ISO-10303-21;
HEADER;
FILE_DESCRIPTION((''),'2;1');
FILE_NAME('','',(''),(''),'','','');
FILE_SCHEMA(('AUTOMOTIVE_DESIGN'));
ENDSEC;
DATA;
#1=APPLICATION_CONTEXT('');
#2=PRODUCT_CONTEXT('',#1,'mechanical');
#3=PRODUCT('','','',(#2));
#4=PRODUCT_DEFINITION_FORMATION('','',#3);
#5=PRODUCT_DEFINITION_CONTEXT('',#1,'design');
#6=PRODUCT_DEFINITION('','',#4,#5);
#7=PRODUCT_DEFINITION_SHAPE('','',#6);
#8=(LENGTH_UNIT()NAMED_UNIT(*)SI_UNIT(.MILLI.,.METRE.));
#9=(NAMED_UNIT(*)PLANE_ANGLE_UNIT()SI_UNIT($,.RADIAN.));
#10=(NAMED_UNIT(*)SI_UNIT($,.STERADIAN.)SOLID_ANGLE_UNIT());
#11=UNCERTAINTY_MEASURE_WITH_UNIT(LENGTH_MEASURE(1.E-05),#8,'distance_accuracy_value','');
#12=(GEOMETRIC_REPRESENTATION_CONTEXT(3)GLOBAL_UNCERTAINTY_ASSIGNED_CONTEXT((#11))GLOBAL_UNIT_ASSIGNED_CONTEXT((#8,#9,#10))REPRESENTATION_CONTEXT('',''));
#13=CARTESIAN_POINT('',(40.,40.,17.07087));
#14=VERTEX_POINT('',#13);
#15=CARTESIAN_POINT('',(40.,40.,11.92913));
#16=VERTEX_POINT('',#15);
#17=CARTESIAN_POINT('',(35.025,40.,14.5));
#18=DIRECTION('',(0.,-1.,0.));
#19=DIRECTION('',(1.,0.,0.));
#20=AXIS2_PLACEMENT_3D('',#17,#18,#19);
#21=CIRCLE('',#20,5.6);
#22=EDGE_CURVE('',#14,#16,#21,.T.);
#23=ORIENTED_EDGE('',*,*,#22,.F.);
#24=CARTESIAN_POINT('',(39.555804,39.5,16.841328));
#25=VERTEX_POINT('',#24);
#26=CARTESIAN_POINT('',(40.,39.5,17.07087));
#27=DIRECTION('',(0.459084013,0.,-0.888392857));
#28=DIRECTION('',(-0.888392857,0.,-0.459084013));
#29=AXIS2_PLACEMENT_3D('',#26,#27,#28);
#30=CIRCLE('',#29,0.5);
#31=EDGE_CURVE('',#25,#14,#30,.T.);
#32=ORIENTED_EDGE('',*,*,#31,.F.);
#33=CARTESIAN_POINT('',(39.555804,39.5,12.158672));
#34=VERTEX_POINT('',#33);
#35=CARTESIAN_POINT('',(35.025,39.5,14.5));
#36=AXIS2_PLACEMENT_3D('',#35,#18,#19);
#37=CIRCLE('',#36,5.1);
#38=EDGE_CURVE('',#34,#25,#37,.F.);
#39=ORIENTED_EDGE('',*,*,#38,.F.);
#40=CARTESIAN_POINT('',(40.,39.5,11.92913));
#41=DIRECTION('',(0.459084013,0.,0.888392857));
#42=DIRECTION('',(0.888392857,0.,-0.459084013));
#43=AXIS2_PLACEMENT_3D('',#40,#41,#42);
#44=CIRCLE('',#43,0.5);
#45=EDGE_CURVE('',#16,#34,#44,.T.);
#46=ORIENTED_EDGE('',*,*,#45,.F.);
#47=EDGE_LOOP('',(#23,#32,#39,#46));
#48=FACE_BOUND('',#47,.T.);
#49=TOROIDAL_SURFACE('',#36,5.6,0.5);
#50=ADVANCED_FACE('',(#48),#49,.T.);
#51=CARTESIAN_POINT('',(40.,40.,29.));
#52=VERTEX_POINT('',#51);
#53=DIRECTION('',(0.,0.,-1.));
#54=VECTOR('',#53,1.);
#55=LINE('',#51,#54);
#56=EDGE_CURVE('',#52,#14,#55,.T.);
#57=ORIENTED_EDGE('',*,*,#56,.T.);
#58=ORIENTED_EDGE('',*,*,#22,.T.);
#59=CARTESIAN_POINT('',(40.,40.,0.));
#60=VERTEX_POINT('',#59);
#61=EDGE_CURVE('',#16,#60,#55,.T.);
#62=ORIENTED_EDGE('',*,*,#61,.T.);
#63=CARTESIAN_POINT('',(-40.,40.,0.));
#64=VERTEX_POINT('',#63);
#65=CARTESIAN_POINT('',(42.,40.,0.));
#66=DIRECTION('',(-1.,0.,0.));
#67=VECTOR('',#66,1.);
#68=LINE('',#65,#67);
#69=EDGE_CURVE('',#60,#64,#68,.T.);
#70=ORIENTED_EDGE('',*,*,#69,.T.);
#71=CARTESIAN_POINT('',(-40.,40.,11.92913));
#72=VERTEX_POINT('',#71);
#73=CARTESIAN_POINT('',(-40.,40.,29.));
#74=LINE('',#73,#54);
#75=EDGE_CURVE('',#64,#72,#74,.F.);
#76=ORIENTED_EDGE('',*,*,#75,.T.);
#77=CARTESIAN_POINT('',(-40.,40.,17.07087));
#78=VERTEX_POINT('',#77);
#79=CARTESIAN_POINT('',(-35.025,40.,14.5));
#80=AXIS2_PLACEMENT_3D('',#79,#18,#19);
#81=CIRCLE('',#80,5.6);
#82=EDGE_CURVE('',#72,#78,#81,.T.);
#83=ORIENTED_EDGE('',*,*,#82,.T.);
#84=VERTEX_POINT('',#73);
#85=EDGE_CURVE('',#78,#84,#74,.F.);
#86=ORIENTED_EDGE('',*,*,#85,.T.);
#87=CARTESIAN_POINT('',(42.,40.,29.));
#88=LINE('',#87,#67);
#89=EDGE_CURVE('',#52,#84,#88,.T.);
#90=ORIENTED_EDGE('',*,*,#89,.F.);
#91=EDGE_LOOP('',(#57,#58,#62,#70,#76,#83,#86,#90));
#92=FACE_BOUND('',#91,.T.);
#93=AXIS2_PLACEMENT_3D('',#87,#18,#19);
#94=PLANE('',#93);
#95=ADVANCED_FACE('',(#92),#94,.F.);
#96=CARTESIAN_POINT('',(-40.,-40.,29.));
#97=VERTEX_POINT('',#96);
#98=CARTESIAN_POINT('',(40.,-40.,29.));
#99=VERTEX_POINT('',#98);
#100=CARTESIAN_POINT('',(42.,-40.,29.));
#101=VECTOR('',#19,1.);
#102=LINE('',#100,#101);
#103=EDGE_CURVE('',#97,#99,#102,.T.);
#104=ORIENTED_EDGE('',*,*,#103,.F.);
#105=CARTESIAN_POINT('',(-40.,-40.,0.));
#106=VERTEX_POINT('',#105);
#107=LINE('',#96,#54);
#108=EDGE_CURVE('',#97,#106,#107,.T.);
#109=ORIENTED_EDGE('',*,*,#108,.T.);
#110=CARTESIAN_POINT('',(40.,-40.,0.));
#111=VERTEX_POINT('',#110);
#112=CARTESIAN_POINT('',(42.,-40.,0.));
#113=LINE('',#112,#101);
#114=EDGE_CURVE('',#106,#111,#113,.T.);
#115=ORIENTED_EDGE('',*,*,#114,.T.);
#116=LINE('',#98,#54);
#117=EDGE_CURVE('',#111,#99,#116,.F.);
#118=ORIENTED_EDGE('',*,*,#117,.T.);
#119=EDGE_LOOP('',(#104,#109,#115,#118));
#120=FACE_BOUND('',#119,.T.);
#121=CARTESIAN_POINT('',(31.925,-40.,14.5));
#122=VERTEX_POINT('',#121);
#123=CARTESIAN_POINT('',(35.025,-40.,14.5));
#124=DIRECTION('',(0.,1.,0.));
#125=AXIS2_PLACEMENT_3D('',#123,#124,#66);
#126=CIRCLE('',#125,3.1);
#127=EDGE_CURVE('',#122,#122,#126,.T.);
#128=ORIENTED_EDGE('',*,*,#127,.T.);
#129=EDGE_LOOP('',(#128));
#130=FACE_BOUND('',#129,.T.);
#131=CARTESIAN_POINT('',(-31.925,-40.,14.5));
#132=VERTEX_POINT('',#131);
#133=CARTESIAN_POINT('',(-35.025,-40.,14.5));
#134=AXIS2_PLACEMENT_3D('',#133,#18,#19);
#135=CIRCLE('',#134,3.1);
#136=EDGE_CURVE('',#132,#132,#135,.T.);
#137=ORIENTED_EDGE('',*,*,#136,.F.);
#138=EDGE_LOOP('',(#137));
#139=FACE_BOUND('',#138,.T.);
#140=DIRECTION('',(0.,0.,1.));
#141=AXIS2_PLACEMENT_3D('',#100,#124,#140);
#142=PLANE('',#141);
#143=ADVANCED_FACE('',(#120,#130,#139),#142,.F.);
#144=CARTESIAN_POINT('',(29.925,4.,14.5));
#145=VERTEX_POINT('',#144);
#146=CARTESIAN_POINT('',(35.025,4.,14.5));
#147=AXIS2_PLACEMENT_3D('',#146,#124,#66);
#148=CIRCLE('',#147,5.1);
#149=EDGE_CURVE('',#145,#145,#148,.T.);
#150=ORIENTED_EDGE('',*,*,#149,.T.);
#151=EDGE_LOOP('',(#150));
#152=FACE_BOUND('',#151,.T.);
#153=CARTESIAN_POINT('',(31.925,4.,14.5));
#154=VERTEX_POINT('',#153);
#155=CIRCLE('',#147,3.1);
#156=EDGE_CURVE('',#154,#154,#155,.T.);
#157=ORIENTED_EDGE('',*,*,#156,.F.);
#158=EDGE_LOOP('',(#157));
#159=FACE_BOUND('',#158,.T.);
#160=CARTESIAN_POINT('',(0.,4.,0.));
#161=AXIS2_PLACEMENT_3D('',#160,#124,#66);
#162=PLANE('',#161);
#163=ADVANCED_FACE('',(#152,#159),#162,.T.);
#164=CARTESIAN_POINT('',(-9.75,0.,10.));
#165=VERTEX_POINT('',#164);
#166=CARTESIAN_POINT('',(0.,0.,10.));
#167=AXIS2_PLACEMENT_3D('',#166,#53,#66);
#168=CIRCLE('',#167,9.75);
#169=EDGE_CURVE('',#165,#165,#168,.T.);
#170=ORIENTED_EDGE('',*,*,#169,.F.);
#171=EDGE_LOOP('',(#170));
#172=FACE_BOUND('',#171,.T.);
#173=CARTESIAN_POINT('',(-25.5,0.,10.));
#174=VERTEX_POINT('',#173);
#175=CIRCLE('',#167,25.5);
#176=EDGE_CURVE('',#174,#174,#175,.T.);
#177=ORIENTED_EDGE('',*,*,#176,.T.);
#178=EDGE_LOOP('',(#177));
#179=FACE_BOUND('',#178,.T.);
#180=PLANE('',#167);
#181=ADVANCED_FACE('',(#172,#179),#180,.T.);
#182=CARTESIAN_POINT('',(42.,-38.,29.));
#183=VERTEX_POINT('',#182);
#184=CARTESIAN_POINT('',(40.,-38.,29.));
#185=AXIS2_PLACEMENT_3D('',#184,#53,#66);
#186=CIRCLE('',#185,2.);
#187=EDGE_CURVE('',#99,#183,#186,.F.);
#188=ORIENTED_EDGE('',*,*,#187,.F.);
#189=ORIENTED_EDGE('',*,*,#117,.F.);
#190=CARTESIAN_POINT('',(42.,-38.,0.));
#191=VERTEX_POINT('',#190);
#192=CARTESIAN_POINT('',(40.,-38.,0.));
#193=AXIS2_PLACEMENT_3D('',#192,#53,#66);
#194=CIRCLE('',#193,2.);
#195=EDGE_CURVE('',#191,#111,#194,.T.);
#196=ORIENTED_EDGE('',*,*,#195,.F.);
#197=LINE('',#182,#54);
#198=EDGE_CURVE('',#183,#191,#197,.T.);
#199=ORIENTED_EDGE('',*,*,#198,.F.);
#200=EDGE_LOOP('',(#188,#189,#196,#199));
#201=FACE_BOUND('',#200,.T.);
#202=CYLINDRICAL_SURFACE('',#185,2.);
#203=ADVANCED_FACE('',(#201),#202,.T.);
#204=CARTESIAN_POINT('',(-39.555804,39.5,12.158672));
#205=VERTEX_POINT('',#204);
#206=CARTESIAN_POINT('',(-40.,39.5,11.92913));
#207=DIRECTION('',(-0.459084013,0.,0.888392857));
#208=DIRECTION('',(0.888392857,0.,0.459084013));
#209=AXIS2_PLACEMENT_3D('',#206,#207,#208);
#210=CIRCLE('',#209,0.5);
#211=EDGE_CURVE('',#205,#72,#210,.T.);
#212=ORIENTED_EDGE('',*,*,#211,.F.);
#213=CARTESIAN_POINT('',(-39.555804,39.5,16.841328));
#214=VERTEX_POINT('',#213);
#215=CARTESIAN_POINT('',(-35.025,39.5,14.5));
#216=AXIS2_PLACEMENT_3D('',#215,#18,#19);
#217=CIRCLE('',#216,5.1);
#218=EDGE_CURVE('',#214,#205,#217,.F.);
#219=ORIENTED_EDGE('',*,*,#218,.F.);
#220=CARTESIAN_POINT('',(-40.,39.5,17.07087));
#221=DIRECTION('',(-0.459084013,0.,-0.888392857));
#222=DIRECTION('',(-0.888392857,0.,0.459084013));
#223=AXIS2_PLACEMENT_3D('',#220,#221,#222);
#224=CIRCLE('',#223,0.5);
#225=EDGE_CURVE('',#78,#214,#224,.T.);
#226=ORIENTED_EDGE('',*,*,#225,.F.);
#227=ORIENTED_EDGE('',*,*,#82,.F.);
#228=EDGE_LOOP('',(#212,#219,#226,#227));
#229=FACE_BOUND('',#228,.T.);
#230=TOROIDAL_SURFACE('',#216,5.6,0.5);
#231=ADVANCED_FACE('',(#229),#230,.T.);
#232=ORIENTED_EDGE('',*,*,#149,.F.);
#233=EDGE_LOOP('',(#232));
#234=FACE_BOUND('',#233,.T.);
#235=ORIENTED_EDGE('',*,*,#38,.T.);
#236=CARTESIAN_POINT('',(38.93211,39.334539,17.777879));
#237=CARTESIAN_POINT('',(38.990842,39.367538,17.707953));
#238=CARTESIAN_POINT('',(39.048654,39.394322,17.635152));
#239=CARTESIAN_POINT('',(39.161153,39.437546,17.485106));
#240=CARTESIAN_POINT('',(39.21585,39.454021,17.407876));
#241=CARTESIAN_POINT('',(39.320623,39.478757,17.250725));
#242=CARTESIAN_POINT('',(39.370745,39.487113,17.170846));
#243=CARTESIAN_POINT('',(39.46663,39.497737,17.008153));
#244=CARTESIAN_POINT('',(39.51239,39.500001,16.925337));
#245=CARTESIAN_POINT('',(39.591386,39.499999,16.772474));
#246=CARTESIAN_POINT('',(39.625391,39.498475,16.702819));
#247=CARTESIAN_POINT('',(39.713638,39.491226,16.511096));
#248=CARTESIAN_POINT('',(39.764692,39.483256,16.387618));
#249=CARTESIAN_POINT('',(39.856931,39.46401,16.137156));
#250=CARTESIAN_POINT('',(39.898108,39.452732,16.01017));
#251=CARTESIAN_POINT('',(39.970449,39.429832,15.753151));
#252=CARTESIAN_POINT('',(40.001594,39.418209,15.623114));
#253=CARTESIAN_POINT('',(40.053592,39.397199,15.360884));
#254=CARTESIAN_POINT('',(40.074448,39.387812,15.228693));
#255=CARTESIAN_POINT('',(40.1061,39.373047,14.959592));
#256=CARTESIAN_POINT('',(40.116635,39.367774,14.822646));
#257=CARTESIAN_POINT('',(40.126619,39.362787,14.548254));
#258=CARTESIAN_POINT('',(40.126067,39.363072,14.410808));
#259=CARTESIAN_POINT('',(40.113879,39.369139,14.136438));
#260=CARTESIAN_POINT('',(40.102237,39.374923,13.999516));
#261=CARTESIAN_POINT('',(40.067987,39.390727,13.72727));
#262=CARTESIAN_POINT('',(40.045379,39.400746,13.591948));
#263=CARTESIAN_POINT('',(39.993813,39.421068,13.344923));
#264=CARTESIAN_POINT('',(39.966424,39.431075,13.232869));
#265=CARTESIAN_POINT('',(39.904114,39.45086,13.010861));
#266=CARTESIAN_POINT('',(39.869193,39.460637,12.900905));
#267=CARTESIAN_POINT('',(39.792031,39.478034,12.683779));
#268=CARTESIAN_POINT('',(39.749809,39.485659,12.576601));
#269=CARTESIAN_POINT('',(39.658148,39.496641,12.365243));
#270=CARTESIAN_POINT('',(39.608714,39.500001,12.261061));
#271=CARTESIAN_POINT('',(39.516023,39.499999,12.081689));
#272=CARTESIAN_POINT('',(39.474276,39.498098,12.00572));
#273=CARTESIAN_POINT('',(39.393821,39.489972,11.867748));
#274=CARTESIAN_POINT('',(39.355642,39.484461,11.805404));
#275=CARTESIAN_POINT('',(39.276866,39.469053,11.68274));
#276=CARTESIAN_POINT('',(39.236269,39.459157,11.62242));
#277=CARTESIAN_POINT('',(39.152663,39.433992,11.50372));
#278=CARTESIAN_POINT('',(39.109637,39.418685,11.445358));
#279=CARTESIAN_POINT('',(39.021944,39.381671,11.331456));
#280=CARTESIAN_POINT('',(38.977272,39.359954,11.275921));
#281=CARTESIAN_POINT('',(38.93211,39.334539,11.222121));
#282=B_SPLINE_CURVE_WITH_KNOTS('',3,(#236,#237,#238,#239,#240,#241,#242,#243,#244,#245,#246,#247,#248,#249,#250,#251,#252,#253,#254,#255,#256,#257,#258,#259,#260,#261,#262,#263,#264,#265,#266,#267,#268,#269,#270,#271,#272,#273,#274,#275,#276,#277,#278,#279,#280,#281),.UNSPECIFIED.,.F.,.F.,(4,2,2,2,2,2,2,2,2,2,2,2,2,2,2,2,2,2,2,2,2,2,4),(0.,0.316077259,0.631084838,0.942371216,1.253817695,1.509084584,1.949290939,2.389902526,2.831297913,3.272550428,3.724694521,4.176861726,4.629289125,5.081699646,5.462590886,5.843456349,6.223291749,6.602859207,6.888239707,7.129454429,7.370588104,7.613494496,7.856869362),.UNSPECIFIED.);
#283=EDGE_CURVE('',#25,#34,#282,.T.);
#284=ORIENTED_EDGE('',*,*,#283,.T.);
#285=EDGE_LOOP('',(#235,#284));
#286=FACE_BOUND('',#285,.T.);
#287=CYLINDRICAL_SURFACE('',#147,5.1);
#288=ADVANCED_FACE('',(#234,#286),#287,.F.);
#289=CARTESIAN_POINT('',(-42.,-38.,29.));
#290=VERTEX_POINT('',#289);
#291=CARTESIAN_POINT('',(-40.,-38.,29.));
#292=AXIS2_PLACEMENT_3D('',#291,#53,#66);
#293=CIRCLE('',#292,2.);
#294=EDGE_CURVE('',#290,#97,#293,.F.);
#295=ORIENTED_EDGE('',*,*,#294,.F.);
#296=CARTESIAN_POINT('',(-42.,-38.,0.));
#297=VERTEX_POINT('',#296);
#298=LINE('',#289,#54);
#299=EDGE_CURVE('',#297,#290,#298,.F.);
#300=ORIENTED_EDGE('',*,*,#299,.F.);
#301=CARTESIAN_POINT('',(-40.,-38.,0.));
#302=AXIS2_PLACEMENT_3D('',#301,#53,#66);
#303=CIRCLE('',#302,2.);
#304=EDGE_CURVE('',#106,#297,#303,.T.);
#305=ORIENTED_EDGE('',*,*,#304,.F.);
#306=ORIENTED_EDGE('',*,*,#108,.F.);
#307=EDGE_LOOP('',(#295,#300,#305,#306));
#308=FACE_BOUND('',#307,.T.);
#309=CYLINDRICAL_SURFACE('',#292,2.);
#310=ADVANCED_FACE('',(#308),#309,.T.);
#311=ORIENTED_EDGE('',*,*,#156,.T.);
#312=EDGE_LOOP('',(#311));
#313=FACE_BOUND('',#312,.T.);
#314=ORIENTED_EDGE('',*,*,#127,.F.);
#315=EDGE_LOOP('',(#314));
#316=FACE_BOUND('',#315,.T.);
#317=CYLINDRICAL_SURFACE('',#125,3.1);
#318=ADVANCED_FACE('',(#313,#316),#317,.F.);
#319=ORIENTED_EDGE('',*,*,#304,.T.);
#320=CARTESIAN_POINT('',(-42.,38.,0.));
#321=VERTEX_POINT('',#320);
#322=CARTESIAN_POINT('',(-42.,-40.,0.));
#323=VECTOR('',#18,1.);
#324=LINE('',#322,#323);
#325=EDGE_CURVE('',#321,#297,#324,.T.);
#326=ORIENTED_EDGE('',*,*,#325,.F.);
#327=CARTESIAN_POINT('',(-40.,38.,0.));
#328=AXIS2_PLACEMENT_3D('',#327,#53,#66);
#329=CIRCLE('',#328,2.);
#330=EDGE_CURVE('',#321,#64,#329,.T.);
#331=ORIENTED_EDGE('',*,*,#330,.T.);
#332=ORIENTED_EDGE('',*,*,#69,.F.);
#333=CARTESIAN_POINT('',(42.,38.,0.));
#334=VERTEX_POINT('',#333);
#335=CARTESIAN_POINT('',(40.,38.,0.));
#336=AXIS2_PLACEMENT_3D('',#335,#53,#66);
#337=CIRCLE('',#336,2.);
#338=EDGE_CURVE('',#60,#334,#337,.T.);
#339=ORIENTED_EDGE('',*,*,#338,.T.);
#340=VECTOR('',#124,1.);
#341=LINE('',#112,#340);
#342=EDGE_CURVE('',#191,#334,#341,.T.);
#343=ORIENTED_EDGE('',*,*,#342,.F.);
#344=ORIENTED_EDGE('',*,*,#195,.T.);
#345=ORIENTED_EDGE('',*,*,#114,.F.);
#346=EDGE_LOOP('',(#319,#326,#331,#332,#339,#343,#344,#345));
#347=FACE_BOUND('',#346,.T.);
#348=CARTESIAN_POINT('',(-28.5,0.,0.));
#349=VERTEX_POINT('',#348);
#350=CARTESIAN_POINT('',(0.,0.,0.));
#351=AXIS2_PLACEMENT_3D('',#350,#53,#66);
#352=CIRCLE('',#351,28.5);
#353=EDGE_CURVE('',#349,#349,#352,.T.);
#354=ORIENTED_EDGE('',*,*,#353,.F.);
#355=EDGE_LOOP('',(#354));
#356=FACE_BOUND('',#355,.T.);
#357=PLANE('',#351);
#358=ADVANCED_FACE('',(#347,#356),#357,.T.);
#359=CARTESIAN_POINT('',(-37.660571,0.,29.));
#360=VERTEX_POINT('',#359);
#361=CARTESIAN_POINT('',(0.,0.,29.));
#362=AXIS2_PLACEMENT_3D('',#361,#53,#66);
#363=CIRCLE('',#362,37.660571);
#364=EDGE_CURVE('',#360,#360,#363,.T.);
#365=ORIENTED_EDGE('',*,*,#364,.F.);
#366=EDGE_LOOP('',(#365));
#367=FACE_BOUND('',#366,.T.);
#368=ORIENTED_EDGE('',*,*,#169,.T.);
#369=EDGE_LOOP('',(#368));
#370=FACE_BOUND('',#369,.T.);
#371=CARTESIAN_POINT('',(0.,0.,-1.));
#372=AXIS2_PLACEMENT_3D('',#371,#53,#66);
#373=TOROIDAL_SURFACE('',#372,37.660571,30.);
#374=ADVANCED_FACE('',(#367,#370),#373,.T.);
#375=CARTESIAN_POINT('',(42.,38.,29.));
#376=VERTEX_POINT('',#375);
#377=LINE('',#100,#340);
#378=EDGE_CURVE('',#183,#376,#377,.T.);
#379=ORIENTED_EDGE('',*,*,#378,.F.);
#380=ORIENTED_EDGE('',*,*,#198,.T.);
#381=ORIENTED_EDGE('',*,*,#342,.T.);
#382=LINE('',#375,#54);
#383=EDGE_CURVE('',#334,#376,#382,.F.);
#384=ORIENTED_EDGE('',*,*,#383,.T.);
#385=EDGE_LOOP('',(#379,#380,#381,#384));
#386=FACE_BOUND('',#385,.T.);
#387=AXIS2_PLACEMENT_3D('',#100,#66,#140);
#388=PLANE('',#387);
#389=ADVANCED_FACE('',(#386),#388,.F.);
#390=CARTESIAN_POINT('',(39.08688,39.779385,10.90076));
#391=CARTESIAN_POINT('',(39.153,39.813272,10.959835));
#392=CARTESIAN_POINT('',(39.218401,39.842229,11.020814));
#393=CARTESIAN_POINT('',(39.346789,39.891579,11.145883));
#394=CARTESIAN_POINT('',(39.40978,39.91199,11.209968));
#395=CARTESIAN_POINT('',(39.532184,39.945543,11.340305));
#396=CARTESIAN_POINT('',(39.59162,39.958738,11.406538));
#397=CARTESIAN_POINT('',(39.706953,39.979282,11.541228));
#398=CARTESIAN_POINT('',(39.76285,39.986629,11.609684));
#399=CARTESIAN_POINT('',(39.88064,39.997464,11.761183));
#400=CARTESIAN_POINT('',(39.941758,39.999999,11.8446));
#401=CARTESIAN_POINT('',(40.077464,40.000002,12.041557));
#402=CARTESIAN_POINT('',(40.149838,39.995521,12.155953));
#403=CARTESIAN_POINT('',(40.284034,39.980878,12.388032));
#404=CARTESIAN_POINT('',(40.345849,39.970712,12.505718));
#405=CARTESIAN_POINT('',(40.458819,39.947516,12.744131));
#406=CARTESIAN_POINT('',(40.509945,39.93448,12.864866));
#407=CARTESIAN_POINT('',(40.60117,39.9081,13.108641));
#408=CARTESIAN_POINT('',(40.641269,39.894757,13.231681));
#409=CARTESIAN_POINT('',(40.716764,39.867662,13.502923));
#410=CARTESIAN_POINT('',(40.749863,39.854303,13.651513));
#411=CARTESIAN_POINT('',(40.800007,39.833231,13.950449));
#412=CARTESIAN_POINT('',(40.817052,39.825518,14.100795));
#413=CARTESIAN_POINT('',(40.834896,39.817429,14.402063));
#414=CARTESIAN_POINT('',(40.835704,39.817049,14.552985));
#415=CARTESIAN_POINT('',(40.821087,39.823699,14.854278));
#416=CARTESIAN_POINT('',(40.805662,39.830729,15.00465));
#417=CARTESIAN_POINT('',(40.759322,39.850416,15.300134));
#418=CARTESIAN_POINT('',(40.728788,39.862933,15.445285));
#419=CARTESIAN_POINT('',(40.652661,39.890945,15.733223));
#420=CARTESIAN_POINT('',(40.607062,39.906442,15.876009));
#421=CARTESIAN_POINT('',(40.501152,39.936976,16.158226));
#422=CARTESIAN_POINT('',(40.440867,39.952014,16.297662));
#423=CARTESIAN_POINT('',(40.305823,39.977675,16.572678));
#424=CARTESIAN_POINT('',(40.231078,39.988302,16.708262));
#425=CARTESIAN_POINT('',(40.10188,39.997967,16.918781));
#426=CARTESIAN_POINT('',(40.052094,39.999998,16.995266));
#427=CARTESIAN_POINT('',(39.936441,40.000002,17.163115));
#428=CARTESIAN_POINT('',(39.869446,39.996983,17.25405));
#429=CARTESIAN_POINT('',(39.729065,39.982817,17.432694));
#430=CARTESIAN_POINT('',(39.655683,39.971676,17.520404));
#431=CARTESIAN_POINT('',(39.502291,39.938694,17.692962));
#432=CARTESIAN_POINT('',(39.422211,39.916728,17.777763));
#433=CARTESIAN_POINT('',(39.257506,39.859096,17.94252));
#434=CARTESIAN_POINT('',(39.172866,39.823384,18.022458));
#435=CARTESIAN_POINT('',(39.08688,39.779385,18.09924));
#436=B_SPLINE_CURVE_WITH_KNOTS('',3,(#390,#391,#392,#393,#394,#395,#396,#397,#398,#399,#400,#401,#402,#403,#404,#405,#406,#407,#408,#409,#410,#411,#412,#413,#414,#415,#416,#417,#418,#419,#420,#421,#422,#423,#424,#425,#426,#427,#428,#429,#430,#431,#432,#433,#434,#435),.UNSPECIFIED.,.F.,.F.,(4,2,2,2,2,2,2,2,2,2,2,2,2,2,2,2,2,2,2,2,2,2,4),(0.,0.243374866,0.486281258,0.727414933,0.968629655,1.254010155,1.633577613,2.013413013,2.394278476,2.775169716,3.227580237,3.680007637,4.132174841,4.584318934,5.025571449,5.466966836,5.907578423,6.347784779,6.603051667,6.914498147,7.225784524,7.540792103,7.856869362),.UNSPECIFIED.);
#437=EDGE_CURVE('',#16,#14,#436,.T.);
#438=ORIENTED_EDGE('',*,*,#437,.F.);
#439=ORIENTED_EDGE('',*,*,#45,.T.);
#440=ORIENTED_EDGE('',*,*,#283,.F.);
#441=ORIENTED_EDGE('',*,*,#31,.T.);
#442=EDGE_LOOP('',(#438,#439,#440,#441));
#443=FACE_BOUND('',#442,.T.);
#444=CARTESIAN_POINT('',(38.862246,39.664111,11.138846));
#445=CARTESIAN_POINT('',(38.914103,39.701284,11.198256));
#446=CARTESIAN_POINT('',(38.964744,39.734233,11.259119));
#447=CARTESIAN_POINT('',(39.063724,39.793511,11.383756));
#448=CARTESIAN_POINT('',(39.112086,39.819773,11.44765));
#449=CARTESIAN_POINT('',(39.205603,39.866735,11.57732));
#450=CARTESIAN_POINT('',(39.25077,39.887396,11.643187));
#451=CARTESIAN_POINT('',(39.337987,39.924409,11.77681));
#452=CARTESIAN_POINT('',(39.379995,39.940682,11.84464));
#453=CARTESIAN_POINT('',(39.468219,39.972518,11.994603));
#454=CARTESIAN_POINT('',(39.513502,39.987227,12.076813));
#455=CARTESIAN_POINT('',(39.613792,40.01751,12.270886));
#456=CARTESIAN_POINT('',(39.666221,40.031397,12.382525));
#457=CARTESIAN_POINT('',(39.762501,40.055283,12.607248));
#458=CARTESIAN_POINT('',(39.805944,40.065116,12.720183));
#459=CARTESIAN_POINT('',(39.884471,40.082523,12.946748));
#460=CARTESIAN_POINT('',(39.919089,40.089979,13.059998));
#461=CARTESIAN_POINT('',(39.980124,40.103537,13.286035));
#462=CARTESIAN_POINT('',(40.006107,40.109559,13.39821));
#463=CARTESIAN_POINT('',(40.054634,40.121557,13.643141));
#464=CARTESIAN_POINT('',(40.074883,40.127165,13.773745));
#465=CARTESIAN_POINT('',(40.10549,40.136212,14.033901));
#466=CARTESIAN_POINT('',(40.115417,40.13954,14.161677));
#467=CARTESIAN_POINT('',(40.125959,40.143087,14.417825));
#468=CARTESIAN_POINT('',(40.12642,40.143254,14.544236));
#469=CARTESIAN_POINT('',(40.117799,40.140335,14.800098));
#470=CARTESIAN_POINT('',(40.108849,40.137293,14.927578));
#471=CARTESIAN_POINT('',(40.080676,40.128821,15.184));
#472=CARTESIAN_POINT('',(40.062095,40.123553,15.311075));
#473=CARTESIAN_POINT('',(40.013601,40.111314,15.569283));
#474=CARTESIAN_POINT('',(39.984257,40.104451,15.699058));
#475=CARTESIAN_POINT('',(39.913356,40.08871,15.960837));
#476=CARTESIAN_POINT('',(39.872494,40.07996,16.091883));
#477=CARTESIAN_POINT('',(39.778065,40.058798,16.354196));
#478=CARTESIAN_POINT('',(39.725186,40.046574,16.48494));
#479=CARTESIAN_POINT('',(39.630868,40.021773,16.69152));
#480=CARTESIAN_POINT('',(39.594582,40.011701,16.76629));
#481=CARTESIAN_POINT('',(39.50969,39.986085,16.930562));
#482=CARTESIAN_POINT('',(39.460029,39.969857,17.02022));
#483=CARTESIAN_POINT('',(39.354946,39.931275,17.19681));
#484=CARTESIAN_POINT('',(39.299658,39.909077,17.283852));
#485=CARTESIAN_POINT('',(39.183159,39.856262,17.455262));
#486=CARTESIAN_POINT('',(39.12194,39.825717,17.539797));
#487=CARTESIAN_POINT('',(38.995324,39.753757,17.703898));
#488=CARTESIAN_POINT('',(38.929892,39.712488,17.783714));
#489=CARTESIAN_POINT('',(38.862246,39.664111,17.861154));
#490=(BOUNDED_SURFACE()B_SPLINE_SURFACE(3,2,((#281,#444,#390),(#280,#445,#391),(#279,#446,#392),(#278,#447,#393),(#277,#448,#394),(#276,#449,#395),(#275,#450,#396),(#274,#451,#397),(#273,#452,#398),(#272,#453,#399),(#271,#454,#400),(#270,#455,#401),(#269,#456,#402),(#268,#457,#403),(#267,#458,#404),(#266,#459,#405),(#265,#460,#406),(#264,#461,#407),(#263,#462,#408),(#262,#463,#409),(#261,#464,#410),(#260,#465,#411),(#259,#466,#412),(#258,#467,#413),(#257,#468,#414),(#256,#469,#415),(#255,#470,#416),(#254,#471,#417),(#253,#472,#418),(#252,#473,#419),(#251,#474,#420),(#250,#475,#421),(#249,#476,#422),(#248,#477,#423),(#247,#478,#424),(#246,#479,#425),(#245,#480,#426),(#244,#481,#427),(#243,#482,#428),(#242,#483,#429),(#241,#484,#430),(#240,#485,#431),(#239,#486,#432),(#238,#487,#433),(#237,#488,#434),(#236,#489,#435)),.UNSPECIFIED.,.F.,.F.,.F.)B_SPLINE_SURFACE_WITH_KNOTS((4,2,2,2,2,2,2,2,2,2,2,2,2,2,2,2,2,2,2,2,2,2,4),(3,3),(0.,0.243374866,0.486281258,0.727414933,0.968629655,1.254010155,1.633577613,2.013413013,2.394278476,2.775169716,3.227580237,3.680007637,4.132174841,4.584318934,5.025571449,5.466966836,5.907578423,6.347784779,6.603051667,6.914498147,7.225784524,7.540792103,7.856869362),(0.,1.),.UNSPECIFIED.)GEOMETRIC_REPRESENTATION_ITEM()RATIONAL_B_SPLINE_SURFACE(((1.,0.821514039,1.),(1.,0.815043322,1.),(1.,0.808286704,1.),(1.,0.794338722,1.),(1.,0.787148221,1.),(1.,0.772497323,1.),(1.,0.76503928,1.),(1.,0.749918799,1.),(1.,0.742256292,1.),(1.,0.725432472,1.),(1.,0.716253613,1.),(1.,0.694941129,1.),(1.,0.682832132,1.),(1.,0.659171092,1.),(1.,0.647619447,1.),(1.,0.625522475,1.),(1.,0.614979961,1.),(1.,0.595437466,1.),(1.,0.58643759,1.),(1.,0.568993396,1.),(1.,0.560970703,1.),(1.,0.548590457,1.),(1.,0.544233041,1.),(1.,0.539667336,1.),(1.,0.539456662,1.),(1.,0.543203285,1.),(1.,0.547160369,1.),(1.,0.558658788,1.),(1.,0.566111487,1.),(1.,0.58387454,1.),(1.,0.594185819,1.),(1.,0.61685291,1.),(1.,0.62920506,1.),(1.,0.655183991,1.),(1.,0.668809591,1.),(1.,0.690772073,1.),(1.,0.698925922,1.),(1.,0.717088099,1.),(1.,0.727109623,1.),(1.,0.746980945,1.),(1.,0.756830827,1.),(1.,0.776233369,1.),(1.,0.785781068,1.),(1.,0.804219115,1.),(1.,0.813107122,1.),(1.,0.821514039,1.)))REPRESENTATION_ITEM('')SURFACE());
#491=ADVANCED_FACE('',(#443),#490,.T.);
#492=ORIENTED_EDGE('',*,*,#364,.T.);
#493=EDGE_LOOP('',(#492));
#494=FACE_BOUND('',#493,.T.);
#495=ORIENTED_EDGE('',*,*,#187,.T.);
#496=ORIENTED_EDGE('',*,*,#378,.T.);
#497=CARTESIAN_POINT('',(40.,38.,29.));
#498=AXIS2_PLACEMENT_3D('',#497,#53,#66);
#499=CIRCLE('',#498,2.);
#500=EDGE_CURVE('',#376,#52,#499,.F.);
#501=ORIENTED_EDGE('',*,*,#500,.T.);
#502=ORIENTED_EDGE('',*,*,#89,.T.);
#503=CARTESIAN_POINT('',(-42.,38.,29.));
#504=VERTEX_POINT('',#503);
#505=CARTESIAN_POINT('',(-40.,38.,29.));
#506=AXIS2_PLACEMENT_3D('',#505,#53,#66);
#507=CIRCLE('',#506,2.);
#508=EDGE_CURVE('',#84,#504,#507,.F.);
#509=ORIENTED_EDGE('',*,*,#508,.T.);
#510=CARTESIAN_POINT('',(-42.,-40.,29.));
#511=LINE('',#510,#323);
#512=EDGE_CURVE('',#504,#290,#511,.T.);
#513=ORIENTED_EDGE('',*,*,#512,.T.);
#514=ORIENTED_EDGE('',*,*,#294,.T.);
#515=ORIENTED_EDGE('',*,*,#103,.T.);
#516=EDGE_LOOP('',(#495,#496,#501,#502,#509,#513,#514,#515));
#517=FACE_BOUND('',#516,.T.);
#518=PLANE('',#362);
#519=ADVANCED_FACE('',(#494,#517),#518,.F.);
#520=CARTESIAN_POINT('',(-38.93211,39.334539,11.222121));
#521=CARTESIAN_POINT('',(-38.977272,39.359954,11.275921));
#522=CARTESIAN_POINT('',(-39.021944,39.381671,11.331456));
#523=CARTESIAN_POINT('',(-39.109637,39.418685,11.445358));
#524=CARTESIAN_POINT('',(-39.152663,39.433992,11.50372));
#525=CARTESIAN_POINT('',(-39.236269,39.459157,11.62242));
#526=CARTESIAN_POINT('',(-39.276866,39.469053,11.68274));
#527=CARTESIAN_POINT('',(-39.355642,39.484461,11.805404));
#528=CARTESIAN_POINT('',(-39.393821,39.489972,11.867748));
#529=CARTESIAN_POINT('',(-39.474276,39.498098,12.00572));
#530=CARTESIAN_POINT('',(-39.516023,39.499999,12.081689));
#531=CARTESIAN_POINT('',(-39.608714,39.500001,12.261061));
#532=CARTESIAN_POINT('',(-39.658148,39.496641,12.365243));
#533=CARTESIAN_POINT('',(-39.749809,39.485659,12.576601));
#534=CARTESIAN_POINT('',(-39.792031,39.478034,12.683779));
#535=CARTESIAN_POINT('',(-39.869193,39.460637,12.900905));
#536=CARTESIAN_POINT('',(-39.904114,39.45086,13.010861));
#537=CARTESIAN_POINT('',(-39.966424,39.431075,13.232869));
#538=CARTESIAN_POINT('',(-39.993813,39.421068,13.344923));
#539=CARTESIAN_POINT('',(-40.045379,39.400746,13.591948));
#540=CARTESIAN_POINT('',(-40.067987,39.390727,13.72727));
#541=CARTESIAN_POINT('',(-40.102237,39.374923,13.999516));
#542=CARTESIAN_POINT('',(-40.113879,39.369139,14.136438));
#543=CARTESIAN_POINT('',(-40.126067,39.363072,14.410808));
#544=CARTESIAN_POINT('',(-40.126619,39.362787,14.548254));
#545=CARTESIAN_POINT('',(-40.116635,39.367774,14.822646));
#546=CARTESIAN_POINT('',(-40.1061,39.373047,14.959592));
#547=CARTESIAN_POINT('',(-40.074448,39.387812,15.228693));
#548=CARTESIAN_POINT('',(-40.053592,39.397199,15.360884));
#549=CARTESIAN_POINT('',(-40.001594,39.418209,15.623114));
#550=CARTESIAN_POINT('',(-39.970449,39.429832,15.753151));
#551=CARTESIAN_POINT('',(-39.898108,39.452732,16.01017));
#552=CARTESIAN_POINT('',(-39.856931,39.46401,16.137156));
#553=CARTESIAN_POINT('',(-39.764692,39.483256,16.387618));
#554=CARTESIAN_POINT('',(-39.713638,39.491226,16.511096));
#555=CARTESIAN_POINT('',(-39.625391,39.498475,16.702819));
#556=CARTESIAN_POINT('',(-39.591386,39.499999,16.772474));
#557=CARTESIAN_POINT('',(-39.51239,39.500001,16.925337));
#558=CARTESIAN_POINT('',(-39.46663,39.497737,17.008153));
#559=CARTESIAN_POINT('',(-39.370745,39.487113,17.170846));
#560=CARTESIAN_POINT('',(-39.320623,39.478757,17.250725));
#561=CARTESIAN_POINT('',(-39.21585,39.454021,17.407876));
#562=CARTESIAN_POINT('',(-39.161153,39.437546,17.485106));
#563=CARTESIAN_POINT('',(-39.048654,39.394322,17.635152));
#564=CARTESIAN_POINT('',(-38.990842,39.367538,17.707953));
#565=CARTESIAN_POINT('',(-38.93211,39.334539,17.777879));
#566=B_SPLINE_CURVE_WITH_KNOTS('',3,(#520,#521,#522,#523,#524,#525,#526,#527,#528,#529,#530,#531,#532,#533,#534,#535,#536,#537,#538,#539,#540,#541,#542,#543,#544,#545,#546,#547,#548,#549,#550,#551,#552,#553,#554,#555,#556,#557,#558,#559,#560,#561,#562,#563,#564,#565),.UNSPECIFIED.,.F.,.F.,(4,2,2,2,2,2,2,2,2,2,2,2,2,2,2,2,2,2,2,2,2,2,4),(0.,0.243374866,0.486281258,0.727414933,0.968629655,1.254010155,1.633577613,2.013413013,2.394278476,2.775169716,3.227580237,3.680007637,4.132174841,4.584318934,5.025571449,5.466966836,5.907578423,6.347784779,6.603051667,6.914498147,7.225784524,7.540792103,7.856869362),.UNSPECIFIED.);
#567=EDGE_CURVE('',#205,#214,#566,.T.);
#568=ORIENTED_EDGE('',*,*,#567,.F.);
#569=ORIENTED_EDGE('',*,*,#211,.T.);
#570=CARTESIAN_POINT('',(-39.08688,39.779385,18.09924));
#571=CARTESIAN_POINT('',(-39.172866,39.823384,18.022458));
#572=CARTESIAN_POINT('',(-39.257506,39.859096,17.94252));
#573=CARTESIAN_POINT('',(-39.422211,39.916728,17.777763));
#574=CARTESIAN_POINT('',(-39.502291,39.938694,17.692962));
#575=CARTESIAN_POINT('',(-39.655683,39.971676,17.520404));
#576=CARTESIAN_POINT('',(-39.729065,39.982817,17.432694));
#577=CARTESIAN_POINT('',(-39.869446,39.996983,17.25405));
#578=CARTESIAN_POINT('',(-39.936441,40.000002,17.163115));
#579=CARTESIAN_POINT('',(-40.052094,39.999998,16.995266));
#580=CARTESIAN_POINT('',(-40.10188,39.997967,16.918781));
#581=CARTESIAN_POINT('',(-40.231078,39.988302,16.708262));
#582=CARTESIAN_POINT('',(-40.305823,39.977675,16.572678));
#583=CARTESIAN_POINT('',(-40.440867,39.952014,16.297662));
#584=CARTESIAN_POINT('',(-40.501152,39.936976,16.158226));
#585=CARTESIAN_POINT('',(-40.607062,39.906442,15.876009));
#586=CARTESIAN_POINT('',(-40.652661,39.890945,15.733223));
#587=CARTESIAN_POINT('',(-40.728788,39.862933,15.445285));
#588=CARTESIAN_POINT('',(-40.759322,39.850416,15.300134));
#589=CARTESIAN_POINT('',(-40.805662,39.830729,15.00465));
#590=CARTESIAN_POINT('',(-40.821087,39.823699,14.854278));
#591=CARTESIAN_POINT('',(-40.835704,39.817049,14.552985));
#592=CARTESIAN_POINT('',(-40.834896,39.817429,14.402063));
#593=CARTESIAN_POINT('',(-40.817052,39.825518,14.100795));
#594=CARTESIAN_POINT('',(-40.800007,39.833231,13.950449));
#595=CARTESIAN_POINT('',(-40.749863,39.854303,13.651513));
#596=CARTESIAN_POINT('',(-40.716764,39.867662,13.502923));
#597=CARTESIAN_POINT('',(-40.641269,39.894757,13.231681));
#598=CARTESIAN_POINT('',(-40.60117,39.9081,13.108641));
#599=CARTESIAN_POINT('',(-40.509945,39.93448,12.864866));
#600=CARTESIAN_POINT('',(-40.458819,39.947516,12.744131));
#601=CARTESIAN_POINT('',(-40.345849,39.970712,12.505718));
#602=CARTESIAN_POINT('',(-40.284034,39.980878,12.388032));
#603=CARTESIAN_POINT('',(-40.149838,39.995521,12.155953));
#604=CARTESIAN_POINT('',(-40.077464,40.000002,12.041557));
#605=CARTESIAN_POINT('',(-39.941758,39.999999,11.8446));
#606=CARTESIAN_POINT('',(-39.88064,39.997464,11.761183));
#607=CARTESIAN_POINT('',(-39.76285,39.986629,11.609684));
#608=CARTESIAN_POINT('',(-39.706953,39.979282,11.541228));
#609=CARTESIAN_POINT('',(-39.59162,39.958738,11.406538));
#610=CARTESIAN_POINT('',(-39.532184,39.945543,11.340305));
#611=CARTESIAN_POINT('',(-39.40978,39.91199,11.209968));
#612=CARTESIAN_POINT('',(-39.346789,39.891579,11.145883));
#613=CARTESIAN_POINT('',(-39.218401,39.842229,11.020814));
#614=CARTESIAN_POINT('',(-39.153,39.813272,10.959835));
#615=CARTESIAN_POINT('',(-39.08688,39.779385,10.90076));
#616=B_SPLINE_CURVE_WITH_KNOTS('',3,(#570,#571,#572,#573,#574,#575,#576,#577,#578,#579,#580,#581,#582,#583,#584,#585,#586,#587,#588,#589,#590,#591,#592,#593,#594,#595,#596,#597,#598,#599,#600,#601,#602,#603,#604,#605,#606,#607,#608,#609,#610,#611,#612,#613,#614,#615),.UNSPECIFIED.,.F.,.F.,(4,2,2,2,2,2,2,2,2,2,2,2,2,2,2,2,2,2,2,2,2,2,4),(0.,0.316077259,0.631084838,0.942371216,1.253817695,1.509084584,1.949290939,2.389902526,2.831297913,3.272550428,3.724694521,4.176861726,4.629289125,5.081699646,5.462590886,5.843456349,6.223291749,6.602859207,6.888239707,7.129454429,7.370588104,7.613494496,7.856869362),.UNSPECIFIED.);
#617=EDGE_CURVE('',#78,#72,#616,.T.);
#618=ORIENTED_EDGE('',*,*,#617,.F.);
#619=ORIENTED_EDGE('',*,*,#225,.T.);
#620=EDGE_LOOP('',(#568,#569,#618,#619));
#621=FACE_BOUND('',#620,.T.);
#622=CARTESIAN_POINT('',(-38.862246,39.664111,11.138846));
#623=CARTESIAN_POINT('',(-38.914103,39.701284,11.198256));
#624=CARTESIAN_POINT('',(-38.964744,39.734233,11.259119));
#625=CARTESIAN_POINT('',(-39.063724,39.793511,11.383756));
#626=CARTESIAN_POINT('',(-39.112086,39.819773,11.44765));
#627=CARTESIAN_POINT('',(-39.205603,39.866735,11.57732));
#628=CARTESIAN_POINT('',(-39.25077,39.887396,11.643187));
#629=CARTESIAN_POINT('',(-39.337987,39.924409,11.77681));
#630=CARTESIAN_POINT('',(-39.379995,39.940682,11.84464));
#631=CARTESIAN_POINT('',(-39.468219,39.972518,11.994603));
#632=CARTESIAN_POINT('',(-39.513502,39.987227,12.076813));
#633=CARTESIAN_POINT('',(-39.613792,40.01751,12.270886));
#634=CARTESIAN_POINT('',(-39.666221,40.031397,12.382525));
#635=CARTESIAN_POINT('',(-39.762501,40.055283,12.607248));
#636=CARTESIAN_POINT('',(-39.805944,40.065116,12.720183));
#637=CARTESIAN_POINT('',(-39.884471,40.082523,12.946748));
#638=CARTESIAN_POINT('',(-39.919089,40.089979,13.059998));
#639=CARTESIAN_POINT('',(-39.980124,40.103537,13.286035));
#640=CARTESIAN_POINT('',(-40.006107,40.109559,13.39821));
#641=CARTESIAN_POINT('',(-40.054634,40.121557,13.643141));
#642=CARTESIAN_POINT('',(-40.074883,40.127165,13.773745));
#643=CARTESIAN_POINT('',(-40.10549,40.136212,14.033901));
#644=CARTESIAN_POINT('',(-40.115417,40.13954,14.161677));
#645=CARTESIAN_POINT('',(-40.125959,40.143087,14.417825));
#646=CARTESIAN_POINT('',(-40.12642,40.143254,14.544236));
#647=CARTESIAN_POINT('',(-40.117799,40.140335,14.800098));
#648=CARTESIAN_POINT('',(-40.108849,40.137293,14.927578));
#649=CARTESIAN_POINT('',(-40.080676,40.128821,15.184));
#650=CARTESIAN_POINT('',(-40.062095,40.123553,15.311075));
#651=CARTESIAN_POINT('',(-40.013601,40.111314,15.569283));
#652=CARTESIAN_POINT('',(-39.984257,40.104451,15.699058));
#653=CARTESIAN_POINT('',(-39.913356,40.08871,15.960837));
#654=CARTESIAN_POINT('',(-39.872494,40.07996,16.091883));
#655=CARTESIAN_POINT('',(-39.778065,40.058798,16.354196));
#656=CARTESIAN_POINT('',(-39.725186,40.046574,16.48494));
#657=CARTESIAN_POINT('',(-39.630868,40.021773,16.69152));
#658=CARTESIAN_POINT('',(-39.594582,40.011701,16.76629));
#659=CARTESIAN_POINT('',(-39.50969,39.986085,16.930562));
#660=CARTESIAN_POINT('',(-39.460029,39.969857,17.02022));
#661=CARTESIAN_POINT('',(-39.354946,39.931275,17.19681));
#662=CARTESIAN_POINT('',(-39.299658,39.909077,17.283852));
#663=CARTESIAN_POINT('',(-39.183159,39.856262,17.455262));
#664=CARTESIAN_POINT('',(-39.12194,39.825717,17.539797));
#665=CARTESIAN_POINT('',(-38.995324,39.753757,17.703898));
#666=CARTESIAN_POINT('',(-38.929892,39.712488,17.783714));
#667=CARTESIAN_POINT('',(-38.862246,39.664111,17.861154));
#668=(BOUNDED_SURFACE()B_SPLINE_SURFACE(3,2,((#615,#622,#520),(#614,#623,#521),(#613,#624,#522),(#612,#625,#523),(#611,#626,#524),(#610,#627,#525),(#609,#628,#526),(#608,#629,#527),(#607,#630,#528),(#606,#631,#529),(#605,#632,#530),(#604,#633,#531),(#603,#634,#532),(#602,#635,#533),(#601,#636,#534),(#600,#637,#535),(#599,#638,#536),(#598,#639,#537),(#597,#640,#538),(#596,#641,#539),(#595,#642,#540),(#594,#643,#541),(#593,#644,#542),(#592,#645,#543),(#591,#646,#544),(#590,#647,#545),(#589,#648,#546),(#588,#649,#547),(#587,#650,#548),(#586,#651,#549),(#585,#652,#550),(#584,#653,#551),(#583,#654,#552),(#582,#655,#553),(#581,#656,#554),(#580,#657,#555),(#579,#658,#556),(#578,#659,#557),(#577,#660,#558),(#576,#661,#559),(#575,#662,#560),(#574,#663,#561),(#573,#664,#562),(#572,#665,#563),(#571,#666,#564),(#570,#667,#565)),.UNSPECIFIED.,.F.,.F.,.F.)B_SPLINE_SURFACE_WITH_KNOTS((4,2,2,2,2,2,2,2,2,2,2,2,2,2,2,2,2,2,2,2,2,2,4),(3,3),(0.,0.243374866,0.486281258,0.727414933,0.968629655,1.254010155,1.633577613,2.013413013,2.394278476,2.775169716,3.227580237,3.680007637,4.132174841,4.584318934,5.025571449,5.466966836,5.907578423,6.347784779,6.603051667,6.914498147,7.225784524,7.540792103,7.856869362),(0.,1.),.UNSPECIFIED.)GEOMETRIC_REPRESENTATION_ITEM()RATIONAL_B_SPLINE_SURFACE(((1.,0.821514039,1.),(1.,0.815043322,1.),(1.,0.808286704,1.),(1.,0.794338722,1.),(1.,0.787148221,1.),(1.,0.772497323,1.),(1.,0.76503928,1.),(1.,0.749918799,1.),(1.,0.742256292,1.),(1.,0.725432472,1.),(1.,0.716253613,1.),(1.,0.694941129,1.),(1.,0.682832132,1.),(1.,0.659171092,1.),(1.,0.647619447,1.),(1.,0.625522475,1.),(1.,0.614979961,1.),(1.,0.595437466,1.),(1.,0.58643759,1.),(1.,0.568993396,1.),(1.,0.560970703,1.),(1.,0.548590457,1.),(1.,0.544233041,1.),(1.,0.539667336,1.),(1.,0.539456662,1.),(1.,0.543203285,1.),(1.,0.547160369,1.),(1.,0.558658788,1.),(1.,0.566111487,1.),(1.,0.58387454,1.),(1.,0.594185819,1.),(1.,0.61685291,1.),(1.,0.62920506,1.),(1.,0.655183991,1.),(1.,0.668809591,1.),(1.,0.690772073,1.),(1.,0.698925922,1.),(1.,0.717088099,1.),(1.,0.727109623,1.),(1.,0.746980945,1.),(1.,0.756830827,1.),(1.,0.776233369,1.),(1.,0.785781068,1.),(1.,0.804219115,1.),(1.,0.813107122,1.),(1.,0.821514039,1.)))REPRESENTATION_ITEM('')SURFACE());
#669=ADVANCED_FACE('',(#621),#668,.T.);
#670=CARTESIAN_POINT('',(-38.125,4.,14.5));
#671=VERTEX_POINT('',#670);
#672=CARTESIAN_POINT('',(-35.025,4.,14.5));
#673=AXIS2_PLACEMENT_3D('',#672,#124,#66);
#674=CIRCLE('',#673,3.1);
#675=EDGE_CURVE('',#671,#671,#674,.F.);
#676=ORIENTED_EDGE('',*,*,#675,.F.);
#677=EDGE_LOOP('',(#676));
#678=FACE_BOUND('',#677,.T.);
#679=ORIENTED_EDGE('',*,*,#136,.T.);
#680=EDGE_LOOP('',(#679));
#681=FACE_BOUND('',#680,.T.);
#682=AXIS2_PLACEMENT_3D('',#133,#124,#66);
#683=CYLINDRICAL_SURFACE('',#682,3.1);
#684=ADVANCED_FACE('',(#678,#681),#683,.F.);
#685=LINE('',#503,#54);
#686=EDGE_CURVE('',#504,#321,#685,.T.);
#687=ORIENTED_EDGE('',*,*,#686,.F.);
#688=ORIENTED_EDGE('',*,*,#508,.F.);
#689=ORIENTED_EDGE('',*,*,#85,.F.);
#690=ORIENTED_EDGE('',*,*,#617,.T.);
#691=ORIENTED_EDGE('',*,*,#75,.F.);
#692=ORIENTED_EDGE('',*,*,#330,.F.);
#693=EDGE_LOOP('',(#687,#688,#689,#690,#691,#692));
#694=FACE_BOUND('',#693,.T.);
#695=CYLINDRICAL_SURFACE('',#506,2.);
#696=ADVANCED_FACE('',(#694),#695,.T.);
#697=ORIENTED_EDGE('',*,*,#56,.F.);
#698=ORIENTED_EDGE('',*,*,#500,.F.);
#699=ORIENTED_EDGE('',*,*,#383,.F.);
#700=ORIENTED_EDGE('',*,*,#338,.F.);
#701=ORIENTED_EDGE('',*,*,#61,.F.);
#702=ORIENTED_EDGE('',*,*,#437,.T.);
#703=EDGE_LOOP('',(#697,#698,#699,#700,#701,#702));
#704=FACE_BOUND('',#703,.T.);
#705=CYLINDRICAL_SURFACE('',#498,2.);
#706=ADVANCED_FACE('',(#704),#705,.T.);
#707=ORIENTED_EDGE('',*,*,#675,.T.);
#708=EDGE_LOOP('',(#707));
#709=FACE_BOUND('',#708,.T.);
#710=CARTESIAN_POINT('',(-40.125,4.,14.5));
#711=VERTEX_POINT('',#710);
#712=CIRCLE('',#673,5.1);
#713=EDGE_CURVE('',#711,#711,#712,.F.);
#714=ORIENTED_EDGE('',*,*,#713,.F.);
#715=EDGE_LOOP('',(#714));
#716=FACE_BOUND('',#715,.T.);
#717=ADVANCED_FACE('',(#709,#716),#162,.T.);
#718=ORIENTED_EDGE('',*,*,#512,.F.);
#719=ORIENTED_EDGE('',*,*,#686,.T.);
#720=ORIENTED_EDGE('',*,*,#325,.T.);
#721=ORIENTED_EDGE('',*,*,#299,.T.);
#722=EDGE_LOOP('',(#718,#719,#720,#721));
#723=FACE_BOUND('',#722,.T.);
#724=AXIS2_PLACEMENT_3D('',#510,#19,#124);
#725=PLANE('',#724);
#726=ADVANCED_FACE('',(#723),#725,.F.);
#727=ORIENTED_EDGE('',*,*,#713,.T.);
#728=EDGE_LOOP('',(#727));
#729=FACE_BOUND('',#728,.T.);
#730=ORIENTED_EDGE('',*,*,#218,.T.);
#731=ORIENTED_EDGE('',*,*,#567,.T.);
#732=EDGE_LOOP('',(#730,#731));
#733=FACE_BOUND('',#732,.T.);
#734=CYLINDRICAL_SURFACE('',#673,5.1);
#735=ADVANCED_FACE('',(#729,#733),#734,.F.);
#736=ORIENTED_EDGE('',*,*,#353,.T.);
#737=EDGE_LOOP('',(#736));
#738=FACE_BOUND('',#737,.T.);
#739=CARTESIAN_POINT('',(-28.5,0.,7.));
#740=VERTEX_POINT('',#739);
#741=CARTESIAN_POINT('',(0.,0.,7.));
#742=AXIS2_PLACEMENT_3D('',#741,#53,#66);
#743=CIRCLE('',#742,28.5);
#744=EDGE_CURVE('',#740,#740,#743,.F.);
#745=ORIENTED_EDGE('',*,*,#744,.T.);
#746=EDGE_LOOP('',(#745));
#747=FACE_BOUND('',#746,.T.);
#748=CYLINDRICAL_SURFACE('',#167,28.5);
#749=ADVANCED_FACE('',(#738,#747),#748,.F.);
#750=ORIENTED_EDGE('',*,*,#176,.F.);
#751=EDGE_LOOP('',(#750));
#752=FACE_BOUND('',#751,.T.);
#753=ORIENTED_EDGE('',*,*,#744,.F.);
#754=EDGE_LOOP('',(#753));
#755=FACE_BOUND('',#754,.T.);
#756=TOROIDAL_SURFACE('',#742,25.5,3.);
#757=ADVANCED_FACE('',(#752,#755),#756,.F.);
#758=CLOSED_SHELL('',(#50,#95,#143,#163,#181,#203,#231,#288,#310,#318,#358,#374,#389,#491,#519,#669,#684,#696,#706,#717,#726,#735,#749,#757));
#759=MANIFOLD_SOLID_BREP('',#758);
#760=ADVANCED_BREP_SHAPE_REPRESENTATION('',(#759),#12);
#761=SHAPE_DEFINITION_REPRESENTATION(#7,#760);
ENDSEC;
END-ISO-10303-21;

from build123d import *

# Parameters (mm, degrees)
SKETCH1_W                    = 80
SKETCH1_H                    = 84
SKETCH1_R                    = 9.75
F_29_MM_EXTRUDE_DEPTH        = 29
SKETCH2_R                    = 28.5
F_7_MM_CUT_DEPTH             = 10
F_30R_FUNNEL_SLOPE_R         = 30
SKETCH3_R                    = 5.1
F_36_MM_CUT_SCREW_HEAD_DEPTH = 36
SKETCH5_R                    = 3.1
F_7_8MM_BORE_DEPTH           = 95.89467846
F_3R_PIG_HOLE_R              = 3
F_2R_CORNERS_R               = 2
F_0_5R_BOLTS_R               = 0.5


with BuildPart() as part:
    # Sketch1 → 29 mm extrude (new body)
    with BuildSketch(Plane(origin=(0, 0, 0), x_dir=(0, 1, 0), z_dir=(0, 0, 1))):
        Rectangle(SKETCH1_W, SKETCH1_H)
        with Locations(Location((0, 0, 0), (0, 0, 90))):
            Circle(SKETCH1_R, mode=Mode.SUBTRACT)
    extrude(amount=F_29_MM_EXTRUDE_DEPTH)

    # Sketch2 → 7 mm cut (cut)
    with BuildSketch(Plane(origin=(0, 0, 0), x_dir=(1, 0, 0), z_dir=(0, 0, -1))):
        with Locations(Location((0, 0, 0), (0, 0, 180))):
            Circle(SKETCH2_R)
    extrude(amount=-F_7_MM_CUT_DEPTH, mode=Mode.SUBTRACT)

    # 30R funnel slope
    # the kernel refuses this fillet: 30 mm, written as the material it takes off along each edge
    with BuildSketch(Plane(origin=(0, 0, 29), x_dir=(-1, 0, 0), z_dir=(0, 1, 0))) as f_30r_funnel_slope_piece_1:
        with BuildLine():
            CenterArc((37.660571474, -30), F_30R_FUNNEL_SLOPE_R, 90, 68.489811733)
            Line((9.75, -19), (9.191788571, -18.78))
            ThreePointArc((9.191788571, -18.78), (9.15, -9.5), (9.15, 0))
            Line((9.15, 0), (9.75, 0.6))
            Line((9.75, 0.6), (37.660571474, 0.6))
            Line((37.660571474, 0.6), (37.660571474, 0))
        make_face()
    revolve(axis=Axis((0, 0, 29), (0, 0, 1)), mode=Mode.SUBTRACT)

    # Sketch3 → 36 mm cut screw head (cut)
    with BuildSketch(Plane(origin=(0, 40, 0), x_dir=(-1, 0, 0), z_dir=(0, 1, 0))):
        with Locations((-35.025, 14.5)):
            Circle(SKETCH3_R)
        with Locations((35.025, 14.5)):
            Circle(SKETCH3_R)
    extrude(amount=-F_36_MM_CUT_SCREW_HEAD_DEPTH, mode=Mode.SUBTRACT)

    # Sketch5 → 7.8mm bore (cut, through all)
    with BuildSketch(Plane(origin=(0, 40, 0), x_dir=(-1, 0, 0), z_dir=(0, 1, 0))):
        with Locations((-35.025, 14.5)):
            Circle(SKETCH5_R)
    f_7_8mm_bore = extrude(amount=-F_7_8MM_BORE_DEPTH, mode=Mode.SUBTRACT)

    # 3R pig hole
    f_3r_pig_hole_edges = [part.edges().sort_by_distance(p)[0] for p in [
        (28.5, 0, 10),
    ]]
    fillet(f_3r_pig_hole_edges, radius=F_3R_PIG_HOLE_R)

    # 2R corners
    # the kernel refuses this fillet: 2 mm, written as the material it takes off along each edge
    with BuildSketch(Plane(origin=(42, 40, -5), x_dir=(0, -1, 0), z_dir=(0, 0, 1)), Plane(origin=(-42, 40, -5), x_dir=(1, 0, 0), z_dir=(0, 0, 1))) as f_2r_corners_piece_1:
        with BuildLine():
            CenterArc((F_2R_CORNERS_R, -F_2R_CORNERS_R), F_2R_CORNERS_R, 90, 90)
            Line((0, -F_2R_CORNERS_R), (0, 0))
            Line((0, 0), (F_2R_CORNERS_R, 0))
        make_face()
    extrude(amount=39, mode=Mode.SUBTRACT)
    with BuildSketch(Plane(origin=(42, -40, -5), x_dir=(0, 1, 0), z_dir=(0, 0, 1)), Plane(origin=(-42, -40, -5), x_dir=(1, 0, 0), z_dir=(0, 0, 1))) as f_2r_corners_piece_2:
        with BuildLine():
            CenterArc((F_2R_CORNERS_R, F_2R_CORNERS_R), F_2R_CORNERS_R, 180, 90)
            Line((0, F_2R_CORNERS_R), (0, 0))
            Line((0, 0), (F_2R_CORNERS_R, 0))
        make_face()
    extrude(amount=39, mode=Mode.SUBTRACT)

    # 0.5R bolts
    f_0_5r_bolts_edges = [part.edges().sort_by_distance(p)[0] for p in [
        (-29.925, 40, 14.5),
        (34.46042051, 40, 19.568653667),
        (-40.093653599, 39.997806015, 15.064580313),
        (40.125, 39.996089928, 14.5),
    ]]
    fillet(f_0_5r_bolts_edges, radius=F_0_5R_BOLTS_R)

    # Mirror1: 7.8mm bore across plane
    add(f_7_8mm_bore.mirror(Plane(origin=(0, 0, 0), x_dir=(0, 0, 1), z_dir=(1, 0, 0))), mode=Mode.SUBTRACT)


solid = part.part
